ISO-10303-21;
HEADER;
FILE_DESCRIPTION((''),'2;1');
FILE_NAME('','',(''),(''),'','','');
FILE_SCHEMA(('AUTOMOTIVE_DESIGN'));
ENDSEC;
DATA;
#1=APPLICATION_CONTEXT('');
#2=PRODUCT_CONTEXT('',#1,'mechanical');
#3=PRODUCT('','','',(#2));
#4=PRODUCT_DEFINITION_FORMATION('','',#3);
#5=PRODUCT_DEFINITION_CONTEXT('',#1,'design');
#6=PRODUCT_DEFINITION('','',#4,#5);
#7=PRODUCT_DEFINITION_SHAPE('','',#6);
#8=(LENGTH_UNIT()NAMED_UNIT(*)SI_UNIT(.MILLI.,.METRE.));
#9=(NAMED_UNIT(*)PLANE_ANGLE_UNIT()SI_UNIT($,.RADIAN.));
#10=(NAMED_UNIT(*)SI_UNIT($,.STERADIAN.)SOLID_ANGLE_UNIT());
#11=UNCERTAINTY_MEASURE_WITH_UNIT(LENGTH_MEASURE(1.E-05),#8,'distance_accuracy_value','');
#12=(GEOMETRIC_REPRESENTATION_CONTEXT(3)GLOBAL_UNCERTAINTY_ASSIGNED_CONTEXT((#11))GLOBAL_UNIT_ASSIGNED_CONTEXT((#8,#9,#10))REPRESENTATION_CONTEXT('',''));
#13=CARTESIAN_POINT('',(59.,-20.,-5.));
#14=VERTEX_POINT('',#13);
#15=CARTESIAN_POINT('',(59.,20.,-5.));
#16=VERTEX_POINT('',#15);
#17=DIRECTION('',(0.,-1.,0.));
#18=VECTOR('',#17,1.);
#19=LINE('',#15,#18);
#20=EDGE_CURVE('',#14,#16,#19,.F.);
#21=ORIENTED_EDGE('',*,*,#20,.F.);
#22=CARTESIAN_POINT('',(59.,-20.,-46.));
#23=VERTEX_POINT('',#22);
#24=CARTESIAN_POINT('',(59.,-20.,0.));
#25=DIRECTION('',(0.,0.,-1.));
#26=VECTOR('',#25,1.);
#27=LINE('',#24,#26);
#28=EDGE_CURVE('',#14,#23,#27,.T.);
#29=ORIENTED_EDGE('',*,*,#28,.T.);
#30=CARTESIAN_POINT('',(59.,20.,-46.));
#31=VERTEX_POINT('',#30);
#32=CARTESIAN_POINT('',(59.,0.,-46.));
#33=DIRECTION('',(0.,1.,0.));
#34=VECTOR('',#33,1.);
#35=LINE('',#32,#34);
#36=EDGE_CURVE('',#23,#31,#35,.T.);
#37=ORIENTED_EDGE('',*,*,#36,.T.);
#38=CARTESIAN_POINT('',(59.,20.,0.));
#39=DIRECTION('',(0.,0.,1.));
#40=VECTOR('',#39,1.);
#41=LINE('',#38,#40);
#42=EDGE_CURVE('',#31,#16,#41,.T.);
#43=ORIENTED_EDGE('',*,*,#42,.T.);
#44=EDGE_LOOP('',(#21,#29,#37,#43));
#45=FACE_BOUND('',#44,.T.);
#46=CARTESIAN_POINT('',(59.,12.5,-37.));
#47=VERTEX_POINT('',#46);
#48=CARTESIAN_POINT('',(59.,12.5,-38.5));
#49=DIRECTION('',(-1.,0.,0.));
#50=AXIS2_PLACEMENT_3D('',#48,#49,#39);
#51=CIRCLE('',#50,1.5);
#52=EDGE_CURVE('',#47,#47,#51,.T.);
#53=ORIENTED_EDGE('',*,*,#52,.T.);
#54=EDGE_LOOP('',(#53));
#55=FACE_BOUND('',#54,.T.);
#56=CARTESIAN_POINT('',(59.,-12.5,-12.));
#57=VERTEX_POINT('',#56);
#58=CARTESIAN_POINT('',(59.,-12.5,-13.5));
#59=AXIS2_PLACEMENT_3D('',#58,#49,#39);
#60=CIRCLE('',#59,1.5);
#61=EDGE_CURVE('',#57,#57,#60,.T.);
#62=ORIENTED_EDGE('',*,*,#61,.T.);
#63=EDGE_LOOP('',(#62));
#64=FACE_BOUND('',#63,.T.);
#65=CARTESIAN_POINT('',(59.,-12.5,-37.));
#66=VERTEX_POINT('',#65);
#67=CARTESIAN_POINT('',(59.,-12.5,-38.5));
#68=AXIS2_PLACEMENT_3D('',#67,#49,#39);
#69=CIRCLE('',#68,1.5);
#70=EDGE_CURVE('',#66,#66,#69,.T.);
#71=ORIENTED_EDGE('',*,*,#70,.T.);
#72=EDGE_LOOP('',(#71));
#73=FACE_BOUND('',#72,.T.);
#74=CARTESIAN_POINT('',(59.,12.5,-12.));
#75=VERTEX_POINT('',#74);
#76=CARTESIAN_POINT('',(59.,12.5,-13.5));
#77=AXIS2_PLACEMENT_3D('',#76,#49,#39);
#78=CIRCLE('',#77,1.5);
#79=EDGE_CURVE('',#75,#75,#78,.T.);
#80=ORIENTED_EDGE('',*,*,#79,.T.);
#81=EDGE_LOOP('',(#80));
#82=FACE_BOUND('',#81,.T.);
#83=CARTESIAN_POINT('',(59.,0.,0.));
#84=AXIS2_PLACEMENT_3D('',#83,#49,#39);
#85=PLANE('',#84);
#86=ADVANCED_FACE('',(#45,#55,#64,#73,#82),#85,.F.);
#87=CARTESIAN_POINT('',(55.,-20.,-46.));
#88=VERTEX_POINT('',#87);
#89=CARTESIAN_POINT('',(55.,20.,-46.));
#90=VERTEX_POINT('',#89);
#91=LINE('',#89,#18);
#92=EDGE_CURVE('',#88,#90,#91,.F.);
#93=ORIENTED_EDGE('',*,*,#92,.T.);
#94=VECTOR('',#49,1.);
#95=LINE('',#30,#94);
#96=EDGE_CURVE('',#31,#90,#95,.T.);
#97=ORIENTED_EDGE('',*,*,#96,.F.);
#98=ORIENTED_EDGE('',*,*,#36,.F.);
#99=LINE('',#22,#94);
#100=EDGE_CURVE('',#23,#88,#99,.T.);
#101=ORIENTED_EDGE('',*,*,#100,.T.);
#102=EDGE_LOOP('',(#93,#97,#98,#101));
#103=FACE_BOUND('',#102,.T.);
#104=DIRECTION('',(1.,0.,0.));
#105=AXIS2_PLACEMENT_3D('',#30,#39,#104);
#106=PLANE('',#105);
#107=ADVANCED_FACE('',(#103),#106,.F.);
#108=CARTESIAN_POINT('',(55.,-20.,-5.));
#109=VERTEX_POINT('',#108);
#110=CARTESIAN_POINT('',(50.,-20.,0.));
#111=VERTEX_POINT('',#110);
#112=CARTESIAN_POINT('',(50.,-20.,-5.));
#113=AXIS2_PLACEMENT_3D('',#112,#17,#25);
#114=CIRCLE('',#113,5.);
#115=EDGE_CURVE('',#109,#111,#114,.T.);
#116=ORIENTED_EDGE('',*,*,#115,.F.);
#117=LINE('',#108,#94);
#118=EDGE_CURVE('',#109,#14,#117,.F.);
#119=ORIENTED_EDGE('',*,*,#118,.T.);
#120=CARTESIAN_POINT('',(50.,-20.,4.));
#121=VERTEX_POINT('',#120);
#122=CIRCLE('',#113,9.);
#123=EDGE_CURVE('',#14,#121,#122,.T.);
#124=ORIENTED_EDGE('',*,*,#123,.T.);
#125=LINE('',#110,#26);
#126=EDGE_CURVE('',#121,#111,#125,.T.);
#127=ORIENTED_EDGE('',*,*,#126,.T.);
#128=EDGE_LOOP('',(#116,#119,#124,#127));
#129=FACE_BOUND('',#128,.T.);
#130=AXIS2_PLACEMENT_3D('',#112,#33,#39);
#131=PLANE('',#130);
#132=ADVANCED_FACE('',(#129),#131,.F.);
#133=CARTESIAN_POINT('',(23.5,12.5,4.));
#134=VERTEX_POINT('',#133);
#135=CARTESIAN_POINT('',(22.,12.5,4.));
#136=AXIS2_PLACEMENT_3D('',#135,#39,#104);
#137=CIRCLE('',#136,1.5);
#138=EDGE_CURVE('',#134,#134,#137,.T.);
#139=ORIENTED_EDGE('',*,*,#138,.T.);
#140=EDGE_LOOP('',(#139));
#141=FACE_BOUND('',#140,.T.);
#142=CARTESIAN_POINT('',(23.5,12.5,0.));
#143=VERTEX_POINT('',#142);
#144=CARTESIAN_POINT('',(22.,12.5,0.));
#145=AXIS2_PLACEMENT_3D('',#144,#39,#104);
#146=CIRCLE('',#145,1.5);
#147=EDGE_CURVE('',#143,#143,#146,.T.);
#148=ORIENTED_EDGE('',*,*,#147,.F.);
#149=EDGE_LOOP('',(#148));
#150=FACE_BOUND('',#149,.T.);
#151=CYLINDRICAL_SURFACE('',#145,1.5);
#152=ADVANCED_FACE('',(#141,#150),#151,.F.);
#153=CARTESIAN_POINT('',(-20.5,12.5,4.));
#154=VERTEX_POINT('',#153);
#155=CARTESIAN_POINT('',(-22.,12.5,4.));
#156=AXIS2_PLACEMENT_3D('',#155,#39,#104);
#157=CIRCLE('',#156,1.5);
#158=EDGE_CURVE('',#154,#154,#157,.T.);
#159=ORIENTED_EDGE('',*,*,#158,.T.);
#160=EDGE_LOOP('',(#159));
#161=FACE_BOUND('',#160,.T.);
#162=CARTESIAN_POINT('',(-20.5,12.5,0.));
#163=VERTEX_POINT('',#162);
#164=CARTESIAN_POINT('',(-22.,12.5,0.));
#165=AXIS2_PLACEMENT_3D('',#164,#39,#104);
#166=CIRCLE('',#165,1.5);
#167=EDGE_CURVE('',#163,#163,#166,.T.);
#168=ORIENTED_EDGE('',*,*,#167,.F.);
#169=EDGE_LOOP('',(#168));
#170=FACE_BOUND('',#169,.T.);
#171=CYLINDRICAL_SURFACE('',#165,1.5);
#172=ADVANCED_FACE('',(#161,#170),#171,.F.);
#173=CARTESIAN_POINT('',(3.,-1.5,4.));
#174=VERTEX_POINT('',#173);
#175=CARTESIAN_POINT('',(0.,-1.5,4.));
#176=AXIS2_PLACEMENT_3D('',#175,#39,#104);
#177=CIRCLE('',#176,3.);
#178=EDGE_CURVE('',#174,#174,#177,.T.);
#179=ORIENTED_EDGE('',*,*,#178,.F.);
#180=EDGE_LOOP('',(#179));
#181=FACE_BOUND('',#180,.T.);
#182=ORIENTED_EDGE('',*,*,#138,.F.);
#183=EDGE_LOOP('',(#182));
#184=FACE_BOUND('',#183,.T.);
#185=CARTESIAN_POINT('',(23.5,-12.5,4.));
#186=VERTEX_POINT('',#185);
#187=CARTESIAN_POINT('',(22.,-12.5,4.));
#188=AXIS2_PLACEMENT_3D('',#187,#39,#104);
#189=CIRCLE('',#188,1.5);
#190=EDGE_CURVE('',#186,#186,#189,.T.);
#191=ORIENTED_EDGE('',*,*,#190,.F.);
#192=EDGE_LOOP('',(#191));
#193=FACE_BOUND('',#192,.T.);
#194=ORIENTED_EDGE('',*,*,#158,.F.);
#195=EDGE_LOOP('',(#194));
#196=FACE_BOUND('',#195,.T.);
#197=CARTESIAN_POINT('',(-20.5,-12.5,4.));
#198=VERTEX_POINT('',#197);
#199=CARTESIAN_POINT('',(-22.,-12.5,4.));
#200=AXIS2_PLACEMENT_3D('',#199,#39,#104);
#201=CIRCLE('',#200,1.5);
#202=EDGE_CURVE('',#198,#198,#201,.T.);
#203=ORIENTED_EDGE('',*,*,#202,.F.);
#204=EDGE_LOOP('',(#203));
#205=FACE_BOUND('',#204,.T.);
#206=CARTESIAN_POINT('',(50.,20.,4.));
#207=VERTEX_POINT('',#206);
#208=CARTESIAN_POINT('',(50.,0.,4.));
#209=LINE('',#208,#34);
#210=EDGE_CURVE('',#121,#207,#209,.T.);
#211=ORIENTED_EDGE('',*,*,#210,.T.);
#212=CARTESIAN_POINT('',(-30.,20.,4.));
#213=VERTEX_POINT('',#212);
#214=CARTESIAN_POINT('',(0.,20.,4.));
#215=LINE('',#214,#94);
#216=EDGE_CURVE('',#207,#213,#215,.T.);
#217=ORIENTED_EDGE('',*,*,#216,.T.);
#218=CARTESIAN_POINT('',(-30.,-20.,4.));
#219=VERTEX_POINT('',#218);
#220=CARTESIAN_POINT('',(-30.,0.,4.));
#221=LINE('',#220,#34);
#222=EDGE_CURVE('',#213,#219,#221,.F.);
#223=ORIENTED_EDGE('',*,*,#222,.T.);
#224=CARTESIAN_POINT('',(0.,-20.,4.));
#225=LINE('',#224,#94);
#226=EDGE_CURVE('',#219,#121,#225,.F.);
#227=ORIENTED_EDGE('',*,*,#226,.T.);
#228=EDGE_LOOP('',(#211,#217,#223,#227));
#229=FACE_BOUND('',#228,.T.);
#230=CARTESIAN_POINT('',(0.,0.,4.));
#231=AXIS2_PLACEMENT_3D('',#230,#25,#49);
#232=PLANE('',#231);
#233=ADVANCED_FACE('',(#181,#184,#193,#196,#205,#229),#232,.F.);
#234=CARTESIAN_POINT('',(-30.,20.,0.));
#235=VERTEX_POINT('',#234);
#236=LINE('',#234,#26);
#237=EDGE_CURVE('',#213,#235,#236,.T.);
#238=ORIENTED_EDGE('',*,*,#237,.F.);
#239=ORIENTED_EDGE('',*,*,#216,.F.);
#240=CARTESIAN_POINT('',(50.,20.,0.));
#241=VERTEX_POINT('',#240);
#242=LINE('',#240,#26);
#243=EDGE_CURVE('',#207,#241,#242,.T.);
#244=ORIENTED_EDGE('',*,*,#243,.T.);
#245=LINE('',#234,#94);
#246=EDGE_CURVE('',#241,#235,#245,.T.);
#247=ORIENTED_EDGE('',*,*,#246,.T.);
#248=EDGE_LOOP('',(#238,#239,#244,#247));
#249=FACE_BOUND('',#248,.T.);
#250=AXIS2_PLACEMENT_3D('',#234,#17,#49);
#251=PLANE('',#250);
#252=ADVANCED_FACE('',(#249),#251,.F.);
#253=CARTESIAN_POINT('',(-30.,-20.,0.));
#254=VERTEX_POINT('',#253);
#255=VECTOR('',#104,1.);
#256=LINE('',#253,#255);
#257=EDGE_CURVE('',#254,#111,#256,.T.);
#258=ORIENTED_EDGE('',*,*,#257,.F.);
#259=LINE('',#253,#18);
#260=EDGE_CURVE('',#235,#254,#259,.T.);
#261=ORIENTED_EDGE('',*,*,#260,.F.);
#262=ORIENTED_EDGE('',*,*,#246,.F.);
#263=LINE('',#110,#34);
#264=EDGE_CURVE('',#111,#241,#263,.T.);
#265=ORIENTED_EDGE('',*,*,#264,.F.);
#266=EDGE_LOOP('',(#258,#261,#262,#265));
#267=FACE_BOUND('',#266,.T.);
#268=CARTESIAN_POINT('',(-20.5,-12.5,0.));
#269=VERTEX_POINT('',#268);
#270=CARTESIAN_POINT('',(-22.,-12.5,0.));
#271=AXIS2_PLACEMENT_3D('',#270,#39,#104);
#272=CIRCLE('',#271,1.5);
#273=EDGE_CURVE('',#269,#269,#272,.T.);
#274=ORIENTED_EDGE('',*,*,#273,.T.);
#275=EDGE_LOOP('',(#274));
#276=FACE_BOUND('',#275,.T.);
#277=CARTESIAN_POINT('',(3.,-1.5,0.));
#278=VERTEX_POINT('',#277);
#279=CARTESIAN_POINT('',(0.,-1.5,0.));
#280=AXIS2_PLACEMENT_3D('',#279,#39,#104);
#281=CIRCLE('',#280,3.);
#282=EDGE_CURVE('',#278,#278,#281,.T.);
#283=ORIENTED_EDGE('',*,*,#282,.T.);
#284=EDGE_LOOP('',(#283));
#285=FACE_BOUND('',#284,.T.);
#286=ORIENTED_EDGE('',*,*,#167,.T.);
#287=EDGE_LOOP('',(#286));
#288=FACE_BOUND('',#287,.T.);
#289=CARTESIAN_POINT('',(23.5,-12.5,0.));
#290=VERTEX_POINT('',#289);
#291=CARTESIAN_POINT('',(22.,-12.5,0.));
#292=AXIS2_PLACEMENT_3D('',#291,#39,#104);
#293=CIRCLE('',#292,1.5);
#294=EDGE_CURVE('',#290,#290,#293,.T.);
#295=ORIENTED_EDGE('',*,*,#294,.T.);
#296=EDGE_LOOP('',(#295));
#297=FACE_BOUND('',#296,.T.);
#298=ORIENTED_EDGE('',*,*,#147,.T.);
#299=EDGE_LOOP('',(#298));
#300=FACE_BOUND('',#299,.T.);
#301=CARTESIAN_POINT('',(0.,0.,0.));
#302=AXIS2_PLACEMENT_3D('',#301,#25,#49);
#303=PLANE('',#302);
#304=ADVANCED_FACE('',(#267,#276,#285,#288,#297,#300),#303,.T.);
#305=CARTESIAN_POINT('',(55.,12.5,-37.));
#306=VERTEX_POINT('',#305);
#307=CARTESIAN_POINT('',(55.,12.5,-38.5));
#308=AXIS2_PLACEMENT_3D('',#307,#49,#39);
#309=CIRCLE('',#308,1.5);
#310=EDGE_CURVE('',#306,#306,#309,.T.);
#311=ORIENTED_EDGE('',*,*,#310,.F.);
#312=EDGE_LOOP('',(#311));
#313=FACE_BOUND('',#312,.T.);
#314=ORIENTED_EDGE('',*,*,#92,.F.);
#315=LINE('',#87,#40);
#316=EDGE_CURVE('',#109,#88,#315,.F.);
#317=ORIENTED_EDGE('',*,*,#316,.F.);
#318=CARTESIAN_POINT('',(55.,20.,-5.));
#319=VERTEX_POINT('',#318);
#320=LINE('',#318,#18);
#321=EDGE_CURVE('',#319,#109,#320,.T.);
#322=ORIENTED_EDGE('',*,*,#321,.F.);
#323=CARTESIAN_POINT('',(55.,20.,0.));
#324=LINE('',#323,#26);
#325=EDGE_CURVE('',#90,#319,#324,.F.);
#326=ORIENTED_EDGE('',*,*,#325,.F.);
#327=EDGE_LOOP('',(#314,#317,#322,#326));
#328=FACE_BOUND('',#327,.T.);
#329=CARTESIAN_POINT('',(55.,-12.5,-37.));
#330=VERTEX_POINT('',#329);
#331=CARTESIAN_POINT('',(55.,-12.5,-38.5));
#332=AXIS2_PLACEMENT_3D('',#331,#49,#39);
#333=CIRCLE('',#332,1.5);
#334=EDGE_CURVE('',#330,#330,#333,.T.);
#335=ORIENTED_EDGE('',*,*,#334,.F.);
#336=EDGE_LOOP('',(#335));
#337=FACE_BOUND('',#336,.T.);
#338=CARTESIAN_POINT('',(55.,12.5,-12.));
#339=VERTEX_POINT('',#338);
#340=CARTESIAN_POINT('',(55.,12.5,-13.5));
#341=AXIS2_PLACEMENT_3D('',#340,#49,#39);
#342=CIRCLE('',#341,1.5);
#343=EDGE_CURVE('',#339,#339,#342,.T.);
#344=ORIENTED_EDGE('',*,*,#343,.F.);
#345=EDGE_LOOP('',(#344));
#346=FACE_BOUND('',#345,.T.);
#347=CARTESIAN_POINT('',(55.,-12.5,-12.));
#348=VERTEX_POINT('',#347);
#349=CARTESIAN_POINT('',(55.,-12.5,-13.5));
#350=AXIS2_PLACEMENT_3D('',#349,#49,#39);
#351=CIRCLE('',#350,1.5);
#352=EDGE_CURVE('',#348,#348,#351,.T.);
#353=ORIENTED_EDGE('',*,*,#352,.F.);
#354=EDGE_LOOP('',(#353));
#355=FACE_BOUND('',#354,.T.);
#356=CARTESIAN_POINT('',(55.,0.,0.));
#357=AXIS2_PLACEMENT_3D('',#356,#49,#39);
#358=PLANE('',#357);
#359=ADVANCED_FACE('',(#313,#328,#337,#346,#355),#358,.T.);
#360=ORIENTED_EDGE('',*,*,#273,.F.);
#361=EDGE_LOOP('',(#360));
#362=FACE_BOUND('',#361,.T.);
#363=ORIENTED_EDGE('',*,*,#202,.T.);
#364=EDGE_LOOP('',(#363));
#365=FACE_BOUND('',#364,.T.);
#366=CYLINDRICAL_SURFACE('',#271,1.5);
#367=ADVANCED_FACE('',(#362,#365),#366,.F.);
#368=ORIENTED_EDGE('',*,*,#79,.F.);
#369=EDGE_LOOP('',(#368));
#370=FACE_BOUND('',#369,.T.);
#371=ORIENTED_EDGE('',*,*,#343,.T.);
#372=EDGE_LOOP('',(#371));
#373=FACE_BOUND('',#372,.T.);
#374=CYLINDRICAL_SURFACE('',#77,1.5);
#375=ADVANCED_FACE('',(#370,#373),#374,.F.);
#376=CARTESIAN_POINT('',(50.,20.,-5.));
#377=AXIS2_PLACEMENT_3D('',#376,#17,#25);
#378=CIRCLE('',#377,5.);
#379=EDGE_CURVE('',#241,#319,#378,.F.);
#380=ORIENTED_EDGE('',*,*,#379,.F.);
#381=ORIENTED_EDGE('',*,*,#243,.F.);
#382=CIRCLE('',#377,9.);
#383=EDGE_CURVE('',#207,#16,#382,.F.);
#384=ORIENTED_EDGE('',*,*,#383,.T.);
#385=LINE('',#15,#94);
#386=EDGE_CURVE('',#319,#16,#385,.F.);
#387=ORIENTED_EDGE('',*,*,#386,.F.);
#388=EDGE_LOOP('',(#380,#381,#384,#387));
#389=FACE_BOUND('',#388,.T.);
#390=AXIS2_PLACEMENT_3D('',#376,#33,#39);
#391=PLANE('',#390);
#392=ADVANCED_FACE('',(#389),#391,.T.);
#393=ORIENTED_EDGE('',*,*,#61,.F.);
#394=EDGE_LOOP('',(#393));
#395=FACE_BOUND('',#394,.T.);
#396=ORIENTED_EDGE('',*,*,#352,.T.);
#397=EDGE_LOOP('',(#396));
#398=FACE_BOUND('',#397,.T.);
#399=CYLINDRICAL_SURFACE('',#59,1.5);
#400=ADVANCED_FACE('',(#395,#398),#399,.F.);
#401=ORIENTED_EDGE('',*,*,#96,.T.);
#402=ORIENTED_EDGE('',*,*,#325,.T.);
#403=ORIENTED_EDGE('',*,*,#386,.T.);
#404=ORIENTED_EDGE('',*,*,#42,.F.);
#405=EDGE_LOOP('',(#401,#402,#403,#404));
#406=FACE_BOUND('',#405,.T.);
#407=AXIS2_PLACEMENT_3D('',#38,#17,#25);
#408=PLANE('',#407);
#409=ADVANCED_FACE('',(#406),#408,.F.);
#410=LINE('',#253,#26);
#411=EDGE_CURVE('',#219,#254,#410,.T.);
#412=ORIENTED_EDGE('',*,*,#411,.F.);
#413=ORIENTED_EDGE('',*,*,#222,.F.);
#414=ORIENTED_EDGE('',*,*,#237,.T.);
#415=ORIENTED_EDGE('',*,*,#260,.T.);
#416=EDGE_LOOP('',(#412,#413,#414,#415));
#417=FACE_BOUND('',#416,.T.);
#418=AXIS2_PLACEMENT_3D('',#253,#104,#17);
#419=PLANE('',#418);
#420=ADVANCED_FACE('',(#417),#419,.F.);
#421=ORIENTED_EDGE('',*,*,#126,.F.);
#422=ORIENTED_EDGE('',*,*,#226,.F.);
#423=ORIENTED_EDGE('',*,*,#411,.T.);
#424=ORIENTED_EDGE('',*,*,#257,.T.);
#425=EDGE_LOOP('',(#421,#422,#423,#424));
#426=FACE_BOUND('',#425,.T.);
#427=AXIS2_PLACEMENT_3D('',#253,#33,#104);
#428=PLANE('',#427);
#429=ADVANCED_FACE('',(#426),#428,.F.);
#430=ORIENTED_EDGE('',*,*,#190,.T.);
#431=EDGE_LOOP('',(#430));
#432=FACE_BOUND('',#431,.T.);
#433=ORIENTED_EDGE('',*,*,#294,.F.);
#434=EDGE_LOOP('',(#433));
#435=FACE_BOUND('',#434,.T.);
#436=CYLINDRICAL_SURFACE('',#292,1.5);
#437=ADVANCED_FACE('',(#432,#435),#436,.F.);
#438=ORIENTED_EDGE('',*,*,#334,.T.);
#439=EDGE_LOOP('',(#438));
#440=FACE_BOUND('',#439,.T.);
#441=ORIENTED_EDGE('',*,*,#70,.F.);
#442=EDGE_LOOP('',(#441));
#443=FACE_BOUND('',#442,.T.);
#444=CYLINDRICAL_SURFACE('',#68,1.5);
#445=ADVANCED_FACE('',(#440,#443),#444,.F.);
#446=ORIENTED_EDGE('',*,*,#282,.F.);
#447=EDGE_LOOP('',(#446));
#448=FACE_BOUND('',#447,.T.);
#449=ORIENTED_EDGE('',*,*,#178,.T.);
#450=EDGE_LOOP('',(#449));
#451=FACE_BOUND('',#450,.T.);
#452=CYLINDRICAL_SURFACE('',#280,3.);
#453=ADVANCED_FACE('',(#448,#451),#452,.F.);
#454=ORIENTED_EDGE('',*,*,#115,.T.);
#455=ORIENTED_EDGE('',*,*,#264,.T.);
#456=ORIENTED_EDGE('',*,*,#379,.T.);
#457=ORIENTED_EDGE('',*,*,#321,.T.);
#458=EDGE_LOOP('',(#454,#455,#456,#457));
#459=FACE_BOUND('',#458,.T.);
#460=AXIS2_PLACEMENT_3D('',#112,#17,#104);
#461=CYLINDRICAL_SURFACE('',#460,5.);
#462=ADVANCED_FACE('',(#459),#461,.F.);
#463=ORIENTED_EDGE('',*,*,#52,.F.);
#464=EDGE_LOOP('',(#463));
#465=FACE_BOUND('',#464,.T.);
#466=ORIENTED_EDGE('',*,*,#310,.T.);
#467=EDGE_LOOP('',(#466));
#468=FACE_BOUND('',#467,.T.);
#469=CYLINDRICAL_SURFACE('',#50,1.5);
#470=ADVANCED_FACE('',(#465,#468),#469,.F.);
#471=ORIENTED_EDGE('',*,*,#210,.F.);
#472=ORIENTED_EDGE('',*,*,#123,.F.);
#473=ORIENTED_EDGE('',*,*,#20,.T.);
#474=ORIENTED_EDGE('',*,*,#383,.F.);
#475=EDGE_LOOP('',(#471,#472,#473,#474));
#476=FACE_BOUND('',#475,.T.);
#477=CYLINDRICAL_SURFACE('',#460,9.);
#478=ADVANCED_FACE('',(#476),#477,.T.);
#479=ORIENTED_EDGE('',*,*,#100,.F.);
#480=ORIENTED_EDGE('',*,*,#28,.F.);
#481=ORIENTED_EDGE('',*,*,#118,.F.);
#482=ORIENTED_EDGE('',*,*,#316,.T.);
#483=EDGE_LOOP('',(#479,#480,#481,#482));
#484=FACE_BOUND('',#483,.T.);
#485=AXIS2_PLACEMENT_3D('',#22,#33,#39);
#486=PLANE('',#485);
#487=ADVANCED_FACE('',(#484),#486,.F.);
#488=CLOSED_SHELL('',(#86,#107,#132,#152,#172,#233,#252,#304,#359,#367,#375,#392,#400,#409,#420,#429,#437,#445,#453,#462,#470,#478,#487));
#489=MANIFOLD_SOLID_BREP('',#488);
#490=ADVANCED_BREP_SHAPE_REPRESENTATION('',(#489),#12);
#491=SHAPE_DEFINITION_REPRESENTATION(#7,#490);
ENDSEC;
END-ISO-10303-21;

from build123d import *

# Parameters (mm, degrees)
SKETCH1_W           = 80
SKETCH1_H           = 40
SKETCH1_R           = 1.5
SKETCH1_R_2         = 3
BOSS_EXTRUDE1_DEPTH = 4
EDGE_FLANGE1_DEPTH  = 40
SKETCH13_R          = 1.5
CUT_EXTRUDE1_DEPTH  = 4


# Sheet-metal steps are written as plain solids
with BuildPart() as part:
    # Sketch1 → Boss-Extrude1 (new body)
    with BuildSketch(Plane.XY):
        with Locations((10, 0)):
            Rectangle(SKETCH1_W, SKETCH1_H)
        with Locations((22, 12.5)):
            Circle(SKETCH1_R, mode=Mode.SUBTRACT)
        with Locations((-22, 12.5)):
            Circle(SKETCH1_R, mode=Mode.SUBTRACT)
        with Locations((-22, -12.5)):
            Circle(SKETCH1_R, mode=Mode.SUBTRACT)
        with Locations((22, -12.5)):
            Circle(SKETCH1_R, mode=Mode.SUBTRACT)
        with Locations((0, -1.5)):
            Circle(SKETCH1_R_2, mode=Mode.SUBTRACT)
    extrude(amount=BOSS_EXTRUDE1_DEPTH)

    # Edge-Flange1 section (across the edge) → Edge-Flange1 (add)
    with BuildSketch(Plane(origin=(55, 20, 0), x_dir=(-1, 0, 0), z_dir=(0, -1, 0))):
        with BuildLine():
            Line((-4, 5), (-4, 46))
            Line((-4, 46), (0, 46))
            Line((0, 46), (0, 5))
            ThreePointArc((0, 5), (1.464466094, 1.464466094), (5, 0))
            Line((5, 0), (5, -4))
            ThreePointArc((5, -4), (-1.363961031, -1.363961031), (-4, 5))
        make_face()
    extrude(amount=EDGE_FLANGE1_DEPTH)

    # Sketch13 → Cut-Extrude1 (cut)
    with BuildSketch(Plane.ZY.offset(-55)):
        with Locations((-38.5, 12.5)):
            Circle(SKETCH13_R)
        with Locations((-13.5, 12.5)):
            Circle(SKETCH13_R)
        with Locations((-13.5, -12.5)):
            Circle(SKETCH13_R)
        with Locations((-38.5, -12.5)):
            Circle(SKETCH13_R)
    extrude(amount=-CUT_EXTRUDE1_DEPTH, mode=Mode.SUBTRACT)


solid = part.part
